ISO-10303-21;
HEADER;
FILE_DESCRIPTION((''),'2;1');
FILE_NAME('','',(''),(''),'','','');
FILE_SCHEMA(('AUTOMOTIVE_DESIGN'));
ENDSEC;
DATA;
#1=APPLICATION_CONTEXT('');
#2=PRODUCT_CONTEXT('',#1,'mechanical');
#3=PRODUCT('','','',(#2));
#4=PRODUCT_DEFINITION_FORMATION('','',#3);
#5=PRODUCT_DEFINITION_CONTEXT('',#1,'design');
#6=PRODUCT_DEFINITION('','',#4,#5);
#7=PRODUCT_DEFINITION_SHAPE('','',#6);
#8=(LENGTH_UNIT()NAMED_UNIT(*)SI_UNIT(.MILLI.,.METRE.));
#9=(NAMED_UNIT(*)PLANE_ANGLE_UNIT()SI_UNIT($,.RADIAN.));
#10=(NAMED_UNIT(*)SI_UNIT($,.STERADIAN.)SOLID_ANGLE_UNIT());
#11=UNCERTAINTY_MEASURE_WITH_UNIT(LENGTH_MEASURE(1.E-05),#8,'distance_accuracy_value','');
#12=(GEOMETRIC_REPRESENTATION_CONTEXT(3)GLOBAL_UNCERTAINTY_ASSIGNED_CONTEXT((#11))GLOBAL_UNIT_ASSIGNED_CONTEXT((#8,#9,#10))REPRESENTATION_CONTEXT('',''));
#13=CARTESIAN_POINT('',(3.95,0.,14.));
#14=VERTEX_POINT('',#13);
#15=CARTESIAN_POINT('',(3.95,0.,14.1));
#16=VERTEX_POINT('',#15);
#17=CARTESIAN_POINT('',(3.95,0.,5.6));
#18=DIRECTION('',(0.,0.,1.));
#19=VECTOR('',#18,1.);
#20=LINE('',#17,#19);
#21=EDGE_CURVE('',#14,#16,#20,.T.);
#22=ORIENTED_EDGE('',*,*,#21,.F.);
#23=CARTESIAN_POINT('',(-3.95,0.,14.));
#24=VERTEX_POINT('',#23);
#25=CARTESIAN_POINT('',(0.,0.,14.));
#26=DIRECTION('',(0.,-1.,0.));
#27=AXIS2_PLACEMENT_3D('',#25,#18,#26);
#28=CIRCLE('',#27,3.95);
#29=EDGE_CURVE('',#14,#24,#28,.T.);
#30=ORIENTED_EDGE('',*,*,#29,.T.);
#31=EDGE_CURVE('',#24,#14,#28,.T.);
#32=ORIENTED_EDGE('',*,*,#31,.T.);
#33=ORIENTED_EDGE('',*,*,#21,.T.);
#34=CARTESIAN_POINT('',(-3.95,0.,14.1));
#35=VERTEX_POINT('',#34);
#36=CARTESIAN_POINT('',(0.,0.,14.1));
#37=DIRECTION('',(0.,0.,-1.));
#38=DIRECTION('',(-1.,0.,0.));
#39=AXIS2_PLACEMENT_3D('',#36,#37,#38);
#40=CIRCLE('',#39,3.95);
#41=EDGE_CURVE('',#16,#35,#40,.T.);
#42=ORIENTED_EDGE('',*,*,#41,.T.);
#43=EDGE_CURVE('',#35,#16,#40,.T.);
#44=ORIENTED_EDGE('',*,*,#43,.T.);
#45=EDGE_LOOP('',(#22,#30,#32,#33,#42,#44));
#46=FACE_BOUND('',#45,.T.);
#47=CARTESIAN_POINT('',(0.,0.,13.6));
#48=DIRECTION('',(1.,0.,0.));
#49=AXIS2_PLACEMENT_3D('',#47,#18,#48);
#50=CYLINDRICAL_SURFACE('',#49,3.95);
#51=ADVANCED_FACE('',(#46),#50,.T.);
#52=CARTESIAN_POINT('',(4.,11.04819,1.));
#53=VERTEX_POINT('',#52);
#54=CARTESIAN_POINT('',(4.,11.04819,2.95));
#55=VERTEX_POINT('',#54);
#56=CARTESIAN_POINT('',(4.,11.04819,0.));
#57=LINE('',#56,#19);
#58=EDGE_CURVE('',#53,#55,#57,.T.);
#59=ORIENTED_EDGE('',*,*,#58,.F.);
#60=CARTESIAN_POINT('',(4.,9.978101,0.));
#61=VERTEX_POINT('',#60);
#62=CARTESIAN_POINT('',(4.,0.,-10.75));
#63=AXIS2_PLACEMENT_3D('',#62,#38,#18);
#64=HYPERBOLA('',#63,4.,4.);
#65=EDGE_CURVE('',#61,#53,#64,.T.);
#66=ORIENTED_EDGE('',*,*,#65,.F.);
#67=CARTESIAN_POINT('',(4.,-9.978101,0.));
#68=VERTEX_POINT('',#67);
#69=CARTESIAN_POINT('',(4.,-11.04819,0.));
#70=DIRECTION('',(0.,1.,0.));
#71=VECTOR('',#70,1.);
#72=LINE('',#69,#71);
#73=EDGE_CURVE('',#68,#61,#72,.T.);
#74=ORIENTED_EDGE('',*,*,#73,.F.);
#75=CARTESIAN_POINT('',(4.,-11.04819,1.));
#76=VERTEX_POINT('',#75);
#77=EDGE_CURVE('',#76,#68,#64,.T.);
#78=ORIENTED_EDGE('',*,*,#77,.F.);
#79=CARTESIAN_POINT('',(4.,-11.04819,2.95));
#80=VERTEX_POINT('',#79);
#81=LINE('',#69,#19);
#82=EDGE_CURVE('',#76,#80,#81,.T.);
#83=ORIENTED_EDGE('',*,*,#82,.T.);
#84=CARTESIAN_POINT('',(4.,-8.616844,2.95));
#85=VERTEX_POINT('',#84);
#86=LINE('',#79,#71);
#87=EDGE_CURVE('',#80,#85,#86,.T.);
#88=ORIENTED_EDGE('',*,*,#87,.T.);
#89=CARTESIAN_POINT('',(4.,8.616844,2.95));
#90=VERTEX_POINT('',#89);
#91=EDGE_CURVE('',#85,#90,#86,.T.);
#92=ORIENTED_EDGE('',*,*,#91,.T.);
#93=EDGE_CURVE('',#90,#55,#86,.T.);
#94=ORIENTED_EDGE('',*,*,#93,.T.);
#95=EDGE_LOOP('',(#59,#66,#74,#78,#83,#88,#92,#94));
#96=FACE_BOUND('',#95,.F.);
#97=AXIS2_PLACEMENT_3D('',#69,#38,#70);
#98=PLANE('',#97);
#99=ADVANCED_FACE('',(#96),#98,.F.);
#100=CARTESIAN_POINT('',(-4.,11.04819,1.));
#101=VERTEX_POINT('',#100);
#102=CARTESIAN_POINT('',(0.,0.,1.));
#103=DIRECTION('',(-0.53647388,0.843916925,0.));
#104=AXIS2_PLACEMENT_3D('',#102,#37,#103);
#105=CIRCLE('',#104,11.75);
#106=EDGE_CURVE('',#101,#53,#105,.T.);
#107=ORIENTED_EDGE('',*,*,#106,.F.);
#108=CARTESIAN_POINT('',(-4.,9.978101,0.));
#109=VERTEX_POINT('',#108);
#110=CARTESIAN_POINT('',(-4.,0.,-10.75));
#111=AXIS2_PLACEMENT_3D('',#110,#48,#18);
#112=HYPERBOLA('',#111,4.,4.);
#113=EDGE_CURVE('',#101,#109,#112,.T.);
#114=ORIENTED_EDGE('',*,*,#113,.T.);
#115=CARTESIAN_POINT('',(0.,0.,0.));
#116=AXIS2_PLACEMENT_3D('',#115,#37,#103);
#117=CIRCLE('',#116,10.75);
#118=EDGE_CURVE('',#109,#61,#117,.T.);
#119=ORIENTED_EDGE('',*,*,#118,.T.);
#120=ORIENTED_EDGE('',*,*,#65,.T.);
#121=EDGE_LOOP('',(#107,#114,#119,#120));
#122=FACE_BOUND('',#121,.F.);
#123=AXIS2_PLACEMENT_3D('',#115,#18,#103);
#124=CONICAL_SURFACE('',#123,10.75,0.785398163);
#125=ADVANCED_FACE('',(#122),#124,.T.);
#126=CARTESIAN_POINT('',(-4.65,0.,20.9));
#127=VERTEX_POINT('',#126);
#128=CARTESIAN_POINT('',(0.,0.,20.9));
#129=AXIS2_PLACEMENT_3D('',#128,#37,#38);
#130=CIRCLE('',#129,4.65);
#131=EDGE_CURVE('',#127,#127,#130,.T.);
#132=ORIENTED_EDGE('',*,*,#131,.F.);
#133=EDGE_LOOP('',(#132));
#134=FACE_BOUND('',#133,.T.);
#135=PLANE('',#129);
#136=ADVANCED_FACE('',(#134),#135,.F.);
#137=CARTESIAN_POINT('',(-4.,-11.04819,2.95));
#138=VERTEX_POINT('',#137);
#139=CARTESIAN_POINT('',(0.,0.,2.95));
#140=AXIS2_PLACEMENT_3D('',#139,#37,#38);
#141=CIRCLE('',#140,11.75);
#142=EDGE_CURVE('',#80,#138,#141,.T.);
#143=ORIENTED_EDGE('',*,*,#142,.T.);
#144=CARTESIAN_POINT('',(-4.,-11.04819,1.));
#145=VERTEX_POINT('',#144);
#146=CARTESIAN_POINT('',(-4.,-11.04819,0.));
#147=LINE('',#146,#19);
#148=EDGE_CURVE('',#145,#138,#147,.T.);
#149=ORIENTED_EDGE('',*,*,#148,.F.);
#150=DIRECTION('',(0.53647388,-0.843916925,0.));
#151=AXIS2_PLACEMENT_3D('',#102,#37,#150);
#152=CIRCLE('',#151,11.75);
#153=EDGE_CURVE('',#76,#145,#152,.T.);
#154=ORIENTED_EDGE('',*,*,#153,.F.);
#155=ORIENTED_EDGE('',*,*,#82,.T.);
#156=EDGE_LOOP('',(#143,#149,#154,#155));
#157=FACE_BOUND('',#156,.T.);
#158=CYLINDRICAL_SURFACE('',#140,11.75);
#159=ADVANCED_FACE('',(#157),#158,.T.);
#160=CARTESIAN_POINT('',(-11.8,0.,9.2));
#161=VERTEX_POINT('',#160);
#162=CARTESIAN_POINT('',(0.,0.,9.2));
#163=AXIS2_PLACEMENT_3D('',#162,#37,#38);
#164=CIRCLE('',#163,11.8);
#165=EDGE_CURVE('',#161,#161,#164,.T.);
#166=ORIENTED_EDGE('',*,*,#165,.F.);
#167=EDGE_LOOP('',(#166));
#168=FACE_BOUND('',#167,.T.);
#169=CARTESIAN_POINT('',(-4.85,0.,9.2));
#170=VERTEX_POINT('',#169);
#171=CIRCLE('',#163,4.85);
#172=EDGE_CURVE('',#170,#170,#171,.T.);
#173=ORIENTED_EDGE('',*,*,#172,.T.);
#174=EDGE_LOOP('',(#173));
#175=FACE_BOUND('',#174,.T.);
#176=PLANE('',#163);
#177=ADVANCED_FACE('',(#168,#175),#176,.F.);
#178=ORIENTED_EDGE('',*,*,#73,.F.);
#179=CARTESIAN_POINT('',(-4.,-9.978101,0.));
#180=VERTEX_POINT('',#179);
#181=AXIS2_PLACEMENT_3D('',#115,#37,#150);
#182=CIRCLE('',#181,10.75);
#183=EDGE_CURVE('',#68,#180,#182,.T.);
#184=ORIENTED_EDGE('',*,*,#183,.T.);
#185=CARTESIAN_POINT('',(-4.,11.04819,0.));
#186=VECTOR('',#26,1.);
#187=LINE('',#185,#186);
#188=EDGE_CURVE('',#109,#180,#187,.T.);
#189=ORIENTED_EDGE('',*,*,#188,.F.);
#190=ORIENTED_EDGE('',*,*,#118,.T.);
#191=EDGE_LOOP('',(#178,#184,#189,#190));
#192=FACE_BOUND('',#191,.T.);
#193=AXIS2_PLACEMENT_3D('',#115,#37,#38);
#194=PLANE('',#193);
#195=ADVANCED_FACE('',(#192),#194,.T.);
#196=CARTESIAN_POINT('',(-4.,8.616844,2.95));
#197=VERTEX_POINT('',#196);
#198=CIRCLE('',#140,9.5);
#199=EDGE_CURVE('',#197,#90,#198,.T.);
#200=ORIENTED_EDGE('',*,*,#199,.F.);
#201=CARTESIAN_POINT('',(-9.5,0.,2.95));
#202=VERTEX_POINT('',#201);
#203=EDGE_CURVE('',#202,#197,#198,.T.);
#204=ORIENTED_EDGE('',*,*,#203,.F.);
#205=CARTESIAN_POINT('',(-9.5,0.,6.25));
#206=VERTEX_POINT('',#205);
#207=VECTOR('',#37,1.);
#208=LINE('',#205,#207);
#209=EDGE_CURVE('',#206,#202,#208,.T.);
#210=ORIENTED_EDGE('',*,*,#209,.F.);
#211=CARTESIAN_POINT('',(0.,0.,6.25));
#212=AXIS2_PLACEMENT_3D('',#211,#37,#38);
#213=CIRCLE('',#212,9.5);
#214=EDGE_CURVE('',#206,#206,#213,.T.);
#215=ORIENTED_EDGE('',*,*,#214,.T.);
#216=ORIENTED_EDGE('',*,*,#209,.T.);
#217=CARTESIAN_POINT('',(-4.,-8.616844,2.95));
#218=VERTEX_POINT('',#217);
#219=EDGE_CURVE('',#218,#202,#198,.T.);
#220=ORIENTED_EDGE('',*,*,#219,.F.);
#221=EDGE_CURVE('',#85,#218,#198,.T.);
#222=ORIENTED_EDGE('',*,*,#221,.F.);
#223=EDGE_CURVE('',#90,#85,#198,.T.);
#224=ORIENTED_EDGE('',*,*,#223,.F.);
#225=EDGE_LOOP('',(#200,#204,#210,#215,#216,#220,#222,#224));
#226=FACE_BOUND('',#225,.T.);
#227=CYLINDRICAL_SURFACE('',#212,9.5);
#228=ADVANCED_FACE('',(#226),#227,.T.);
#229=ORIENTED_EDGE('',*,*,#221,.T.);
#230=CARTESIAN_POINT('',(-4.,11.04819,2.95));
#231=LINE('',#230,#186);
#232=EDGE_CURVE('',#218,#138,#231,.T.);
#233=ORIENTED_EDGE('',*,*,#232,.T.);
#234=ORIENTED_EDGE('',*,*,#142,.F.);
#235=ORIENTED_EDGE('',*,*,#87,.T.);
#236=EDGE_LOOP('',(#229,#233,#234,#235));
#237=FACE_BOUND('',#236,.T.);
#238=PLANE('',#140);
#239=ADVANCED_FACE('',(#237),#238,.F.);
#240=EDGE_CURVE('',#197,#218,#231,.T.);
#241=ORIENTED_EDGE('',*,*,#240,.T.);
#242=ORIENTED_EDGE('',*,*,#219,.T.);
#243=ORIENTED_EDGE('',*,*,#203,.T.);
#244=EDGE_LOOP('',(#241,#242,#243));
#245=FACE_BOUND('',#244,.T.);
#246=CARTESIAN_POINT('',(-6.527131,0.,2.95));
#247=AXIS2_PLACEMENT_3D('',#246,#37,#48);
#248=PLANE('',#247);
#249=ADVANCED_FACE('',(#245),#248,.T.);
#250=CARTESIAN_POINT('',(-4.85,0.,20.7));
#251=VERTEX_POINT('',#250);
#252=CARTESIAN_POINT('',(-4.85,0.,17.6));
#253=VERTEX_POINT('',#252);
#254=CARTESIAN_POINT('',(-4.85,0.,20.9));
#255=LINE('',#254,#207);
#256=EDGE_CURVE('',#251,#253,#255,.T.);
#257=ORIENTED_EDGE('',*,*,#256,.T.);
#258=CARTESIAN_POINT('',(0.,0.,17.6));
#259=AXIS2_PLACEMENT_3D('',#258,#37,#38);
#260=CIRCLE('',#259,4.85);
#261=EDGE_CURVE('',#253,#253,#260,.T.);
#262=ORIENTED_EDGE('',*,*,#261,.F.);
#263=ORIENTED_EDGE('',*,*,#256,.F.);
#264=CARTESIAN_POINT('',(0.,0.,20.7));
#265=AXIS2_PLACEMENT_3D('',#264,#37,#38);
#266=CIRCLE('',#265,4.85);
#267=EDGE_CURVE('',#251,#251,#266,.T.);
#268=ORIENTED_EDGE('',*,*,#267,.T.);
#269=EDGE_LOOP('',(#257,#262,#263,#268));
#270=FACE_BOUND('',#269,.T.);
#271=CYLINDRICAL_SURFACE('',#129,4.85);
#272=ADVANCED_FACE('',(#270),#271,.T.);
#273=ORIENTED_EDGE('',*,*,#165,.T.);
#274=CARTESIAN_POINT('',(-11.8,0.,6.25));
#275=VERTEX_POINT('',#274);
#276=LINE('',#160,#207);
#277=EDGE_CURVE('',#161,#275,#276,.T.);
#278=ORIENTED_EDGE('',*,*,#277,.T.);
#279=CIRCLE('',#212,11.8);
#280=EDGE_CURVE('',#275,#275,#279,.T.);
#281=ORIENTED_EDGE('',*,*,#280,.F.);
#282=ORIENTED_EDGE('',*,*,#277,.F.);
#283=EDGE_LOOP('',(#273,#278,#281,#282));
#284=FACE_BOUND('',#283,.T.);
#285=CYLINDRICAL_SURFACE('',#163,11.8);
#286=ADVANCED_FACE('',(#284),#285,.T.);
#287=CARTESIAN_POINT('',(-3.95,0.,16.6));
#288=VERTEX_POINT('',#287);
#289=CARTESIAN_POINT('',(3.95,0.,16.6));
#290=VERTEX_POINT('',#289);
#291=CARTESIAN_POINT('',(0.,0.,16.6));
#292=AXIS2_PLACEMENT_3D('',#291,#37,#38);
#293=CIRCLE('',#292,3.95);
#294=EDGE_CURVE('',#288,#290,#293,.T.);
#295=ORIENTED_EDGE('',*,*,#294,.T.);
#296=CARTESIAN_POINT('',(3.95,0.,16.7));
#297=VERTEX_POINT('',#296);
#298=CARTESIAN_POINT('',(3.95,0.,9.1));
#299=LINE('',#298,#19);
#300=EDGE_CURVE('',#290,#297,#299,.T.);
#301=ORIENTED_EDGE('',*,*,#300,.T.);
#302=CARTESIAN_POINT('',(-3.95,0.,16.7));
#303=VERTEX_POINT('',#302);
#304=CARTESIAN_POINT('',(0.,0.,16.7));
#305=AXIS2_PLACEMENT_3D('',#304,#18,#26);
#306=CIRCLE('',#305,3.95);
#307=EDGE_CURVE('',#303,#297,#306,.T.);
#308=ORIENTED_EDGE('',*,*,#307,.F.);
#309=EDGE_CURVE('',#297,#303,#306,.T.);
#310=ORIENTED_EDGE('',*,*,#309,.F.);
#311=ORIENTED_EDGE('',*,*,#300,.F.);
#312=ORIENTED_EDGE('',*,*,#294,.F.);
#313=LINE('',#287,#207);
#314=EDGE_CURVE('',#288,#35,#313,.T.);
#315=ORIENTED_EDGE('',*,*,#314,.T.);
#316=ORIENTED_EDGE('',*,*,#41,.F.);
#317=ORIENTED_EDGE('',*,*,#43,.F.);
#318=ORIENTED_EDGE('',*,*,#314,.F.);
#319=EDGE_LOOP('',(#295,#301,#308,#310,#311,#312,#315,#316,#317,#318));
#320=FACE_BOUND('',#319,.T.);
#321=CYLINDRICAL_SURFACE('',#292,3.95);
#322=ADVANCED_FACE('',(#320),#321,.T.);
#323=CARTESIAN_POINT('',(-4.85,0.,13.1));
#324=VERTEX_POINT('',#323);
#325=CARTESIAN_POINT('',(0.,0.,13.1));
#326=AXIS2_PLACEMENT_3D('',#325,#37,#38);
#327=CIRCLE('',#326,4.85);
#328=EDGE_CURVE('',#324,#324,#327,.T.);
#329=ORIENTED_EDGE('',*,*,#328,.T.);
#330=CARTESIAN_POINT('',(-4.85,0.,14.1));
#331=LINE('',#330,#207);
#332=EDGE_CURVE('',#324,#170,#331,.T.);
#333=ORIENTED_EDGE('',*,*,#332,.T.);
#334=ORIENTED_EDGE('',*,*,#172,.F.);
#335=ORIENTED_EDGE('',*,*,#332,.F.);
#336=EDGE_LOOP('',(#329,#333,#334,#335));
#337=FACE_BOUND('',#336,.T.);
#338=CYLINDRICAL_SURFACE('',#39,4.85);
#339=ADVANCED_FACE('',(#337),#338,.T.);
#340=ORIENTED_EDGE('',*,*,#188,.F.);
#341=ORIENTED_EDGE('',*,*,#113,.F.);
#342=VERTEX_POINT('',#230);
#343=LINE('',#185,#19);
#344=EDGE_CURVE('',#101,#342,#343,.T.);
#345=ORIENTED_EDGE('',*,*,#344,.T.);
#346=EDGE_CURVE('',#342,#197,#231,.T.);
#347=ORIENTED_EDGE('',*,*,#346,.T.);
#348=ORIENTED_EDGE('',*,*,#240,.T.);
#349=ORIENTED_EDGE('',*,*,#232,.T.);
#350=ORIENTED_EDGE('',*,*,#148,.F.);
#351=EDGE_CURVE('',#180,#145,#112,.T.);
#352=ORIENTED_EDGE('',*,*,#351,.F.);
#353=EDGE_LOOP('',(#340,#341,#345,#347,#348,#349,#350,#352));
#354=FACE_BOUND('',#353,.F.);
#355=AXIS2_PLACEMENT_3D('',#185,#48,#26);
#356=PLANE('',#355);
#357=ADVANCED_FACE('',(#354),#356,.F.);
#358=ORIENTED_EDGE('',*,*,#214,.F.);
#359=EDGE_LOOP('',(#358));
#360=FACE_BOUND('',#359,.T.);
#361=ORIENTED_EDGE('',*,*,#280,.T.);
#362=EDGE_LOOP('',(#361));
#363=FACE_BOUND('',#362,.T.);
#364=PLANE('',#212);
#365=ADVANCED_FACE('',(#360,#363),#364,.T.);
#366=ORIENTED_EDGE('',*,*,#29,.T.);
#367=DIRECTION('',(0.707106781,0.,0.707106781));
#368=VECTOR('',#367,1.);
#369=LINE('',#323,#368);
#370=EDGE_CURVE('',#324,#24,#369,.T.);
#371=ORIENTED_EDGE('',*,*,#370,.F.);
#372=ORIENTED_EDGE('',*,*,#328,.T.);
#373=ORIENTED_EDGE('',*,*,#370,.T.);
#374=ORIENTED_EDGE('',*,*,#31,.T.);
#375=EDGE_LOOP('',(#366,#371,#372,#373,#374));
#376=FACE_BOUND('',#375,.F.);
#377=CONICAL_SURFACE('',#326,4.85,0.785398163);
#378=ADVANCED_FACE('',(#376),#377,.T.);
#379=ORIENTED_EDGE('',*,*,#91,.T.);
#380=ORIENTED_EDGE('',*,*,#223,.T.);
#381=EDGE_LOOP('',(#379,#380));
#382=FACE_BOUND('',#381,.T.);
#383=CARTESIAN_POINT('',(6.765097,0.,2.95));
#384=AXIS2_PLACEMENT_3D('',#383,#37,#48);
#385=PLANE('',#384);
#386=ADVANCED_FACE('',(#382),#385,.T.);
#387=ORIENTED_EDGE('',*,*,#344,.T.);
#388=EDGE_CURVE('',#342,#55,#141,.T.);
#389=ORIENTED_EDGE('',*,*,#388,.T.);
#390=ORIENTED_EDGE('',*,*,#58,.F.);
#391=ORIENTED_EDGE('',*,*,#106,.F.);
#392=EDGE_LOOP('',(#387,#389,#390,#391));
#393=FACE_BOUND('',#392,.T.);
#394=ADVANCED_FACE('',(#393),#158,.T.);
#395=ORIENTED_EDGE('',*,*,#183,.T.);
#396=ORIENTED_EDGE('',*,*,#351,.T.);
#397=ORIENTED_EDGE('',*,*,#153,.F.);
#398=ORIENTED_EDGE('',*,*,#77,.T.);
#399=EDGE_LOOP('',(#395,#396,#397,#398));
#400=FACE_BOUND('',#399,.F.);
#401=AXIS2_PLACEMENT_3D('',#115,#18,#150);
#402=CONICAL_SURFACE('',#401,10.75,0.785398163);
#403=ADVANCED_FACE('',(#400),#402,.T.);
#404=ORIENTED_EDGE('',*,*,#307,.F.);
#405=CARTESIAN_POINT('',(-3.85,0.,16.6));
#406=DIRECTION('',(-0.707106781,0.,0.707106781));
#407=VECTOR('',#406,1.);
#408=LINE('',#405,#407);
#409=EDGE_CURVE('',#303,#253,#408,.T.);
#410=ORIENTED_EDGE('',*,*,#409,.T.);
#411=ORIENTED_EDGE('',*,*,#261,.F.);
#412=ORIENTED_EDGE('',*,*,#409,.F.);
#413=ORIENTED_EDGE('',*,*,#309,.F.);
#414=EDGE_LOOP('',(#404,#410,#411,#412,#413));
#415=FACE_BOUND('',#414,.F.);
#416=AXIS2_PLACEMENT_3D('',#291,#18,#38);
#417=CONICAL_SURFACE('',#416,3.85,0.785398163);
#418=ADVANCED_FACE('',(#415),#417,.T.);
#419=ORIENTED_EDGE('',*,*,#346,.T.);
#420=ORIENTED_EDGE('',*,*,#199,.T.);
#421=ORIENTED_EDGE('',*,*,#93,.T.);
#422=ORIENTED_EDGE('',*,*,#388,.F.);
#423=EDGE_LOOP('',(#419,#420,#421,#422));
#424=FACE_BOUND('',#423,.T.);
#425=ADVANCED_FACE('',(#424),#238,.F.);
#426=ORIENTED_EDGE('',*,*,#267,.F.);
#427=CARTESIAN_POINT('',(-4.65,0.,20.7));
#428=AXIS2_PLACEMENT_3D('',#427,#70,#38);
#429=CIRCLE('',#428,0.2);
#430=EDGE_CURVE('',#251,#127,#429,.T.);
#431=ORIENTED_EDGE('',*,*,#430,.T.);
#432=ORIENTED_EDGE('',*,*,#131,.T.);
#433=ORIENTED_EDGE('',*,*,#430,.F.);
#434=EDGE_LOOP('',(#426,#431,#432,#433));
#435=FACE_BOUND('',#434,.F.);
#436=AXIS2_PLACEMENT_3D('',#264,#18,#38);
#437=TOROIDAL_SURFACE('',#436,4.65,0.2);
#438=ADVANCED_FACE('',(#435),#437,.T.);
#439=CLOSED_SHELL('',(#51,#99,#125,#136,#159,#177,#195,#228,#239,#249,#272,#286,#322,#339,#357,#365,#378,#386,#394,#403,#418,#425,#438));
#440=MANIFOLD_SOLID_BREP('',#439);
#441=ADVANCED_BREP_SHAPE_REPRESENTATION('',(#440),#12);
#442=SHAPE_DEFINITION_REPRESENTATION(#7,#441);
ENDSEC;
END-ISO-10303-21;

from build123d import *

# Parameters (mm, degrees)
F3_DEPTH     = 2.95
F4_T2_ANGLE  = 64.8878433285
F4_T4_ANGLE  = 64.8878433285
F4_S9_R      = 3.95
F4_T10_DEPTH = 8
F4_S15_R     = 3.95
F4_T16_DEPTH = 8
F5_R         = 0.2


# Not quite as in the source:
# - a fillet or chamfer that OpenCascade refuses, or shapes differently, is made with other operations: its cross-section is extruded or revolved along the edge and cut away or added


with BuildPart() as f1:
    # F0 (on Front) → F1 (revolve)
    with BuildSketch(Plane.XZ):
        Polygon((-11.75, 0), (0, 0), (0, 20.9), (-4.85, 20.9), (-4.85, 16.6), (-3.95, 16.6), (-3.95, 14.1), (-4.85, 14.1), (-4.85, 9.2), (-11.8, 9.2), (-11.8, 6.25), (-9.5, 6.25), (-9.5, 2.95), (-11.75, 2.95), align=None)
    revolve(axis=Axis((0, 0, 10.45), (0, 0, -1)))

    # F2 (on face) → F3 (cut, through all)
    with BuildSketch(Plane(origin=(0, 0, 0), x_dir=(1, 0, 0), z_dir=(0, 0, -1))):
        with BuildLine():
            Line((-4, -11.048189897), (-4, 11.048189897))
            ThreePointArc((-4, 11.048189897), (-11.75, 0), (-4, -11.048189897))
        make_face()
        with BuildLine():
            ThreePointArc((11.75, 0), (9.6193165038, 6.7476847881), (4, 11.048189897))
            Line((4, 11.048189897), (4, -11.048189897))
            ThreePointArc((4, -11.048189897), (9.6193165038, -6.7476847881), (11.75, 0))
        make_face()
    extrude(amount=-F3_DEPTH, mode=Mode.SUBTRACT)

    # F4: chamfer of 1 on 4 edges, made by hand

    # F4_s1 → F4_t2 (revolve, cut)
    with BuildSketch(Plane(origin=(0, 0, 0), x_dir=(0, 0, 1), z_dir=(0.8439169246, 0.5364738804, 0))):
        Polygon((0, 10.75), (1, 11.75), (0, 11.75), align=None)
    revolve(axis=Axis((0, 0, 0), (0, 0, -1)), revolution_arc=F4_T2_ANGLE, mode=Mode.SUBTRACT)

    # F4_s3 → F4_t4 (revolve, cut)
    with BuildSketch(Plane(origin=(0, 0, 0), x_dir=(0, 0, 1), z_dir=(-0.8439169246, -0.5364738804, 0))):
        Polygon((0, 10.75), (1, 11.75), (0, 11.75), align=None)
    revolve(axis=Axis((0, 0, 0), (0, 0, -1)), revolution_arc=F4_T4_ANGLE, mode=Mode.SUBTRACT)


with BuildPart() as f4_tool6:
    # F4_s7 → F4_t8 (revolve)
    with BuildSketch(Plane.XZ):
        Polygon((-3.85, 16.6), (-4.85, 17.6), (-4.85, 16.6), align=None)
    revolve(axis=Axis((0, 0, 16.6), (0, 0, -1)))

    # F4_s9 → F4_t10 (cut, symmetric)
    with BuildSketch(Plane.XY.offset(17.1)):
        Circle(F4_S9_R)
    extrude(amount=F4_T10_DEPTH, both=True, mode=Mode.SUBTRACT)


with BuildPart() as f1_1:
    add(f1.part)

    # F4_t5: cut F4_tool6
    add(f4_tool6.part, mode=Mode.SUBTRACT)


with BuildPart() as f4_tool12:
    # F4_s13 → F4_t14 (revolve)
    with BuildSketch(Plane.XZ):
        Polygon((-4.85, 13.1), (-3.85, 14.1), (-4.85, 14.1), align=None)
    revolve(axis=Axis((0, 0, 14.1), (0, 0, -1)))

    # F4_s15 → F4_t16 (cut, symmetric)
    with BuildSketch(Plane.XY.offset(13.6)):
        Circle(F4_S15_R)
    extrude(amount=F4_T16_DEPTH, both=True, mode=Mode.SUBTRACT)


with BuildPart() as f1_2:
    add(f1_1.part)

    # F4_t11: cut F4_tool12
    add(f4_tool12.part, mode=Mode.SUBTRACT)

    # F5
    f5_edges = [f1_2.edges().sort_by_distance(p)[0] for p in [
        (4.85, 0, 20.9),
    ]]
    fillet(f5_edges, radius=F5_R)


solid = f1_2.part
